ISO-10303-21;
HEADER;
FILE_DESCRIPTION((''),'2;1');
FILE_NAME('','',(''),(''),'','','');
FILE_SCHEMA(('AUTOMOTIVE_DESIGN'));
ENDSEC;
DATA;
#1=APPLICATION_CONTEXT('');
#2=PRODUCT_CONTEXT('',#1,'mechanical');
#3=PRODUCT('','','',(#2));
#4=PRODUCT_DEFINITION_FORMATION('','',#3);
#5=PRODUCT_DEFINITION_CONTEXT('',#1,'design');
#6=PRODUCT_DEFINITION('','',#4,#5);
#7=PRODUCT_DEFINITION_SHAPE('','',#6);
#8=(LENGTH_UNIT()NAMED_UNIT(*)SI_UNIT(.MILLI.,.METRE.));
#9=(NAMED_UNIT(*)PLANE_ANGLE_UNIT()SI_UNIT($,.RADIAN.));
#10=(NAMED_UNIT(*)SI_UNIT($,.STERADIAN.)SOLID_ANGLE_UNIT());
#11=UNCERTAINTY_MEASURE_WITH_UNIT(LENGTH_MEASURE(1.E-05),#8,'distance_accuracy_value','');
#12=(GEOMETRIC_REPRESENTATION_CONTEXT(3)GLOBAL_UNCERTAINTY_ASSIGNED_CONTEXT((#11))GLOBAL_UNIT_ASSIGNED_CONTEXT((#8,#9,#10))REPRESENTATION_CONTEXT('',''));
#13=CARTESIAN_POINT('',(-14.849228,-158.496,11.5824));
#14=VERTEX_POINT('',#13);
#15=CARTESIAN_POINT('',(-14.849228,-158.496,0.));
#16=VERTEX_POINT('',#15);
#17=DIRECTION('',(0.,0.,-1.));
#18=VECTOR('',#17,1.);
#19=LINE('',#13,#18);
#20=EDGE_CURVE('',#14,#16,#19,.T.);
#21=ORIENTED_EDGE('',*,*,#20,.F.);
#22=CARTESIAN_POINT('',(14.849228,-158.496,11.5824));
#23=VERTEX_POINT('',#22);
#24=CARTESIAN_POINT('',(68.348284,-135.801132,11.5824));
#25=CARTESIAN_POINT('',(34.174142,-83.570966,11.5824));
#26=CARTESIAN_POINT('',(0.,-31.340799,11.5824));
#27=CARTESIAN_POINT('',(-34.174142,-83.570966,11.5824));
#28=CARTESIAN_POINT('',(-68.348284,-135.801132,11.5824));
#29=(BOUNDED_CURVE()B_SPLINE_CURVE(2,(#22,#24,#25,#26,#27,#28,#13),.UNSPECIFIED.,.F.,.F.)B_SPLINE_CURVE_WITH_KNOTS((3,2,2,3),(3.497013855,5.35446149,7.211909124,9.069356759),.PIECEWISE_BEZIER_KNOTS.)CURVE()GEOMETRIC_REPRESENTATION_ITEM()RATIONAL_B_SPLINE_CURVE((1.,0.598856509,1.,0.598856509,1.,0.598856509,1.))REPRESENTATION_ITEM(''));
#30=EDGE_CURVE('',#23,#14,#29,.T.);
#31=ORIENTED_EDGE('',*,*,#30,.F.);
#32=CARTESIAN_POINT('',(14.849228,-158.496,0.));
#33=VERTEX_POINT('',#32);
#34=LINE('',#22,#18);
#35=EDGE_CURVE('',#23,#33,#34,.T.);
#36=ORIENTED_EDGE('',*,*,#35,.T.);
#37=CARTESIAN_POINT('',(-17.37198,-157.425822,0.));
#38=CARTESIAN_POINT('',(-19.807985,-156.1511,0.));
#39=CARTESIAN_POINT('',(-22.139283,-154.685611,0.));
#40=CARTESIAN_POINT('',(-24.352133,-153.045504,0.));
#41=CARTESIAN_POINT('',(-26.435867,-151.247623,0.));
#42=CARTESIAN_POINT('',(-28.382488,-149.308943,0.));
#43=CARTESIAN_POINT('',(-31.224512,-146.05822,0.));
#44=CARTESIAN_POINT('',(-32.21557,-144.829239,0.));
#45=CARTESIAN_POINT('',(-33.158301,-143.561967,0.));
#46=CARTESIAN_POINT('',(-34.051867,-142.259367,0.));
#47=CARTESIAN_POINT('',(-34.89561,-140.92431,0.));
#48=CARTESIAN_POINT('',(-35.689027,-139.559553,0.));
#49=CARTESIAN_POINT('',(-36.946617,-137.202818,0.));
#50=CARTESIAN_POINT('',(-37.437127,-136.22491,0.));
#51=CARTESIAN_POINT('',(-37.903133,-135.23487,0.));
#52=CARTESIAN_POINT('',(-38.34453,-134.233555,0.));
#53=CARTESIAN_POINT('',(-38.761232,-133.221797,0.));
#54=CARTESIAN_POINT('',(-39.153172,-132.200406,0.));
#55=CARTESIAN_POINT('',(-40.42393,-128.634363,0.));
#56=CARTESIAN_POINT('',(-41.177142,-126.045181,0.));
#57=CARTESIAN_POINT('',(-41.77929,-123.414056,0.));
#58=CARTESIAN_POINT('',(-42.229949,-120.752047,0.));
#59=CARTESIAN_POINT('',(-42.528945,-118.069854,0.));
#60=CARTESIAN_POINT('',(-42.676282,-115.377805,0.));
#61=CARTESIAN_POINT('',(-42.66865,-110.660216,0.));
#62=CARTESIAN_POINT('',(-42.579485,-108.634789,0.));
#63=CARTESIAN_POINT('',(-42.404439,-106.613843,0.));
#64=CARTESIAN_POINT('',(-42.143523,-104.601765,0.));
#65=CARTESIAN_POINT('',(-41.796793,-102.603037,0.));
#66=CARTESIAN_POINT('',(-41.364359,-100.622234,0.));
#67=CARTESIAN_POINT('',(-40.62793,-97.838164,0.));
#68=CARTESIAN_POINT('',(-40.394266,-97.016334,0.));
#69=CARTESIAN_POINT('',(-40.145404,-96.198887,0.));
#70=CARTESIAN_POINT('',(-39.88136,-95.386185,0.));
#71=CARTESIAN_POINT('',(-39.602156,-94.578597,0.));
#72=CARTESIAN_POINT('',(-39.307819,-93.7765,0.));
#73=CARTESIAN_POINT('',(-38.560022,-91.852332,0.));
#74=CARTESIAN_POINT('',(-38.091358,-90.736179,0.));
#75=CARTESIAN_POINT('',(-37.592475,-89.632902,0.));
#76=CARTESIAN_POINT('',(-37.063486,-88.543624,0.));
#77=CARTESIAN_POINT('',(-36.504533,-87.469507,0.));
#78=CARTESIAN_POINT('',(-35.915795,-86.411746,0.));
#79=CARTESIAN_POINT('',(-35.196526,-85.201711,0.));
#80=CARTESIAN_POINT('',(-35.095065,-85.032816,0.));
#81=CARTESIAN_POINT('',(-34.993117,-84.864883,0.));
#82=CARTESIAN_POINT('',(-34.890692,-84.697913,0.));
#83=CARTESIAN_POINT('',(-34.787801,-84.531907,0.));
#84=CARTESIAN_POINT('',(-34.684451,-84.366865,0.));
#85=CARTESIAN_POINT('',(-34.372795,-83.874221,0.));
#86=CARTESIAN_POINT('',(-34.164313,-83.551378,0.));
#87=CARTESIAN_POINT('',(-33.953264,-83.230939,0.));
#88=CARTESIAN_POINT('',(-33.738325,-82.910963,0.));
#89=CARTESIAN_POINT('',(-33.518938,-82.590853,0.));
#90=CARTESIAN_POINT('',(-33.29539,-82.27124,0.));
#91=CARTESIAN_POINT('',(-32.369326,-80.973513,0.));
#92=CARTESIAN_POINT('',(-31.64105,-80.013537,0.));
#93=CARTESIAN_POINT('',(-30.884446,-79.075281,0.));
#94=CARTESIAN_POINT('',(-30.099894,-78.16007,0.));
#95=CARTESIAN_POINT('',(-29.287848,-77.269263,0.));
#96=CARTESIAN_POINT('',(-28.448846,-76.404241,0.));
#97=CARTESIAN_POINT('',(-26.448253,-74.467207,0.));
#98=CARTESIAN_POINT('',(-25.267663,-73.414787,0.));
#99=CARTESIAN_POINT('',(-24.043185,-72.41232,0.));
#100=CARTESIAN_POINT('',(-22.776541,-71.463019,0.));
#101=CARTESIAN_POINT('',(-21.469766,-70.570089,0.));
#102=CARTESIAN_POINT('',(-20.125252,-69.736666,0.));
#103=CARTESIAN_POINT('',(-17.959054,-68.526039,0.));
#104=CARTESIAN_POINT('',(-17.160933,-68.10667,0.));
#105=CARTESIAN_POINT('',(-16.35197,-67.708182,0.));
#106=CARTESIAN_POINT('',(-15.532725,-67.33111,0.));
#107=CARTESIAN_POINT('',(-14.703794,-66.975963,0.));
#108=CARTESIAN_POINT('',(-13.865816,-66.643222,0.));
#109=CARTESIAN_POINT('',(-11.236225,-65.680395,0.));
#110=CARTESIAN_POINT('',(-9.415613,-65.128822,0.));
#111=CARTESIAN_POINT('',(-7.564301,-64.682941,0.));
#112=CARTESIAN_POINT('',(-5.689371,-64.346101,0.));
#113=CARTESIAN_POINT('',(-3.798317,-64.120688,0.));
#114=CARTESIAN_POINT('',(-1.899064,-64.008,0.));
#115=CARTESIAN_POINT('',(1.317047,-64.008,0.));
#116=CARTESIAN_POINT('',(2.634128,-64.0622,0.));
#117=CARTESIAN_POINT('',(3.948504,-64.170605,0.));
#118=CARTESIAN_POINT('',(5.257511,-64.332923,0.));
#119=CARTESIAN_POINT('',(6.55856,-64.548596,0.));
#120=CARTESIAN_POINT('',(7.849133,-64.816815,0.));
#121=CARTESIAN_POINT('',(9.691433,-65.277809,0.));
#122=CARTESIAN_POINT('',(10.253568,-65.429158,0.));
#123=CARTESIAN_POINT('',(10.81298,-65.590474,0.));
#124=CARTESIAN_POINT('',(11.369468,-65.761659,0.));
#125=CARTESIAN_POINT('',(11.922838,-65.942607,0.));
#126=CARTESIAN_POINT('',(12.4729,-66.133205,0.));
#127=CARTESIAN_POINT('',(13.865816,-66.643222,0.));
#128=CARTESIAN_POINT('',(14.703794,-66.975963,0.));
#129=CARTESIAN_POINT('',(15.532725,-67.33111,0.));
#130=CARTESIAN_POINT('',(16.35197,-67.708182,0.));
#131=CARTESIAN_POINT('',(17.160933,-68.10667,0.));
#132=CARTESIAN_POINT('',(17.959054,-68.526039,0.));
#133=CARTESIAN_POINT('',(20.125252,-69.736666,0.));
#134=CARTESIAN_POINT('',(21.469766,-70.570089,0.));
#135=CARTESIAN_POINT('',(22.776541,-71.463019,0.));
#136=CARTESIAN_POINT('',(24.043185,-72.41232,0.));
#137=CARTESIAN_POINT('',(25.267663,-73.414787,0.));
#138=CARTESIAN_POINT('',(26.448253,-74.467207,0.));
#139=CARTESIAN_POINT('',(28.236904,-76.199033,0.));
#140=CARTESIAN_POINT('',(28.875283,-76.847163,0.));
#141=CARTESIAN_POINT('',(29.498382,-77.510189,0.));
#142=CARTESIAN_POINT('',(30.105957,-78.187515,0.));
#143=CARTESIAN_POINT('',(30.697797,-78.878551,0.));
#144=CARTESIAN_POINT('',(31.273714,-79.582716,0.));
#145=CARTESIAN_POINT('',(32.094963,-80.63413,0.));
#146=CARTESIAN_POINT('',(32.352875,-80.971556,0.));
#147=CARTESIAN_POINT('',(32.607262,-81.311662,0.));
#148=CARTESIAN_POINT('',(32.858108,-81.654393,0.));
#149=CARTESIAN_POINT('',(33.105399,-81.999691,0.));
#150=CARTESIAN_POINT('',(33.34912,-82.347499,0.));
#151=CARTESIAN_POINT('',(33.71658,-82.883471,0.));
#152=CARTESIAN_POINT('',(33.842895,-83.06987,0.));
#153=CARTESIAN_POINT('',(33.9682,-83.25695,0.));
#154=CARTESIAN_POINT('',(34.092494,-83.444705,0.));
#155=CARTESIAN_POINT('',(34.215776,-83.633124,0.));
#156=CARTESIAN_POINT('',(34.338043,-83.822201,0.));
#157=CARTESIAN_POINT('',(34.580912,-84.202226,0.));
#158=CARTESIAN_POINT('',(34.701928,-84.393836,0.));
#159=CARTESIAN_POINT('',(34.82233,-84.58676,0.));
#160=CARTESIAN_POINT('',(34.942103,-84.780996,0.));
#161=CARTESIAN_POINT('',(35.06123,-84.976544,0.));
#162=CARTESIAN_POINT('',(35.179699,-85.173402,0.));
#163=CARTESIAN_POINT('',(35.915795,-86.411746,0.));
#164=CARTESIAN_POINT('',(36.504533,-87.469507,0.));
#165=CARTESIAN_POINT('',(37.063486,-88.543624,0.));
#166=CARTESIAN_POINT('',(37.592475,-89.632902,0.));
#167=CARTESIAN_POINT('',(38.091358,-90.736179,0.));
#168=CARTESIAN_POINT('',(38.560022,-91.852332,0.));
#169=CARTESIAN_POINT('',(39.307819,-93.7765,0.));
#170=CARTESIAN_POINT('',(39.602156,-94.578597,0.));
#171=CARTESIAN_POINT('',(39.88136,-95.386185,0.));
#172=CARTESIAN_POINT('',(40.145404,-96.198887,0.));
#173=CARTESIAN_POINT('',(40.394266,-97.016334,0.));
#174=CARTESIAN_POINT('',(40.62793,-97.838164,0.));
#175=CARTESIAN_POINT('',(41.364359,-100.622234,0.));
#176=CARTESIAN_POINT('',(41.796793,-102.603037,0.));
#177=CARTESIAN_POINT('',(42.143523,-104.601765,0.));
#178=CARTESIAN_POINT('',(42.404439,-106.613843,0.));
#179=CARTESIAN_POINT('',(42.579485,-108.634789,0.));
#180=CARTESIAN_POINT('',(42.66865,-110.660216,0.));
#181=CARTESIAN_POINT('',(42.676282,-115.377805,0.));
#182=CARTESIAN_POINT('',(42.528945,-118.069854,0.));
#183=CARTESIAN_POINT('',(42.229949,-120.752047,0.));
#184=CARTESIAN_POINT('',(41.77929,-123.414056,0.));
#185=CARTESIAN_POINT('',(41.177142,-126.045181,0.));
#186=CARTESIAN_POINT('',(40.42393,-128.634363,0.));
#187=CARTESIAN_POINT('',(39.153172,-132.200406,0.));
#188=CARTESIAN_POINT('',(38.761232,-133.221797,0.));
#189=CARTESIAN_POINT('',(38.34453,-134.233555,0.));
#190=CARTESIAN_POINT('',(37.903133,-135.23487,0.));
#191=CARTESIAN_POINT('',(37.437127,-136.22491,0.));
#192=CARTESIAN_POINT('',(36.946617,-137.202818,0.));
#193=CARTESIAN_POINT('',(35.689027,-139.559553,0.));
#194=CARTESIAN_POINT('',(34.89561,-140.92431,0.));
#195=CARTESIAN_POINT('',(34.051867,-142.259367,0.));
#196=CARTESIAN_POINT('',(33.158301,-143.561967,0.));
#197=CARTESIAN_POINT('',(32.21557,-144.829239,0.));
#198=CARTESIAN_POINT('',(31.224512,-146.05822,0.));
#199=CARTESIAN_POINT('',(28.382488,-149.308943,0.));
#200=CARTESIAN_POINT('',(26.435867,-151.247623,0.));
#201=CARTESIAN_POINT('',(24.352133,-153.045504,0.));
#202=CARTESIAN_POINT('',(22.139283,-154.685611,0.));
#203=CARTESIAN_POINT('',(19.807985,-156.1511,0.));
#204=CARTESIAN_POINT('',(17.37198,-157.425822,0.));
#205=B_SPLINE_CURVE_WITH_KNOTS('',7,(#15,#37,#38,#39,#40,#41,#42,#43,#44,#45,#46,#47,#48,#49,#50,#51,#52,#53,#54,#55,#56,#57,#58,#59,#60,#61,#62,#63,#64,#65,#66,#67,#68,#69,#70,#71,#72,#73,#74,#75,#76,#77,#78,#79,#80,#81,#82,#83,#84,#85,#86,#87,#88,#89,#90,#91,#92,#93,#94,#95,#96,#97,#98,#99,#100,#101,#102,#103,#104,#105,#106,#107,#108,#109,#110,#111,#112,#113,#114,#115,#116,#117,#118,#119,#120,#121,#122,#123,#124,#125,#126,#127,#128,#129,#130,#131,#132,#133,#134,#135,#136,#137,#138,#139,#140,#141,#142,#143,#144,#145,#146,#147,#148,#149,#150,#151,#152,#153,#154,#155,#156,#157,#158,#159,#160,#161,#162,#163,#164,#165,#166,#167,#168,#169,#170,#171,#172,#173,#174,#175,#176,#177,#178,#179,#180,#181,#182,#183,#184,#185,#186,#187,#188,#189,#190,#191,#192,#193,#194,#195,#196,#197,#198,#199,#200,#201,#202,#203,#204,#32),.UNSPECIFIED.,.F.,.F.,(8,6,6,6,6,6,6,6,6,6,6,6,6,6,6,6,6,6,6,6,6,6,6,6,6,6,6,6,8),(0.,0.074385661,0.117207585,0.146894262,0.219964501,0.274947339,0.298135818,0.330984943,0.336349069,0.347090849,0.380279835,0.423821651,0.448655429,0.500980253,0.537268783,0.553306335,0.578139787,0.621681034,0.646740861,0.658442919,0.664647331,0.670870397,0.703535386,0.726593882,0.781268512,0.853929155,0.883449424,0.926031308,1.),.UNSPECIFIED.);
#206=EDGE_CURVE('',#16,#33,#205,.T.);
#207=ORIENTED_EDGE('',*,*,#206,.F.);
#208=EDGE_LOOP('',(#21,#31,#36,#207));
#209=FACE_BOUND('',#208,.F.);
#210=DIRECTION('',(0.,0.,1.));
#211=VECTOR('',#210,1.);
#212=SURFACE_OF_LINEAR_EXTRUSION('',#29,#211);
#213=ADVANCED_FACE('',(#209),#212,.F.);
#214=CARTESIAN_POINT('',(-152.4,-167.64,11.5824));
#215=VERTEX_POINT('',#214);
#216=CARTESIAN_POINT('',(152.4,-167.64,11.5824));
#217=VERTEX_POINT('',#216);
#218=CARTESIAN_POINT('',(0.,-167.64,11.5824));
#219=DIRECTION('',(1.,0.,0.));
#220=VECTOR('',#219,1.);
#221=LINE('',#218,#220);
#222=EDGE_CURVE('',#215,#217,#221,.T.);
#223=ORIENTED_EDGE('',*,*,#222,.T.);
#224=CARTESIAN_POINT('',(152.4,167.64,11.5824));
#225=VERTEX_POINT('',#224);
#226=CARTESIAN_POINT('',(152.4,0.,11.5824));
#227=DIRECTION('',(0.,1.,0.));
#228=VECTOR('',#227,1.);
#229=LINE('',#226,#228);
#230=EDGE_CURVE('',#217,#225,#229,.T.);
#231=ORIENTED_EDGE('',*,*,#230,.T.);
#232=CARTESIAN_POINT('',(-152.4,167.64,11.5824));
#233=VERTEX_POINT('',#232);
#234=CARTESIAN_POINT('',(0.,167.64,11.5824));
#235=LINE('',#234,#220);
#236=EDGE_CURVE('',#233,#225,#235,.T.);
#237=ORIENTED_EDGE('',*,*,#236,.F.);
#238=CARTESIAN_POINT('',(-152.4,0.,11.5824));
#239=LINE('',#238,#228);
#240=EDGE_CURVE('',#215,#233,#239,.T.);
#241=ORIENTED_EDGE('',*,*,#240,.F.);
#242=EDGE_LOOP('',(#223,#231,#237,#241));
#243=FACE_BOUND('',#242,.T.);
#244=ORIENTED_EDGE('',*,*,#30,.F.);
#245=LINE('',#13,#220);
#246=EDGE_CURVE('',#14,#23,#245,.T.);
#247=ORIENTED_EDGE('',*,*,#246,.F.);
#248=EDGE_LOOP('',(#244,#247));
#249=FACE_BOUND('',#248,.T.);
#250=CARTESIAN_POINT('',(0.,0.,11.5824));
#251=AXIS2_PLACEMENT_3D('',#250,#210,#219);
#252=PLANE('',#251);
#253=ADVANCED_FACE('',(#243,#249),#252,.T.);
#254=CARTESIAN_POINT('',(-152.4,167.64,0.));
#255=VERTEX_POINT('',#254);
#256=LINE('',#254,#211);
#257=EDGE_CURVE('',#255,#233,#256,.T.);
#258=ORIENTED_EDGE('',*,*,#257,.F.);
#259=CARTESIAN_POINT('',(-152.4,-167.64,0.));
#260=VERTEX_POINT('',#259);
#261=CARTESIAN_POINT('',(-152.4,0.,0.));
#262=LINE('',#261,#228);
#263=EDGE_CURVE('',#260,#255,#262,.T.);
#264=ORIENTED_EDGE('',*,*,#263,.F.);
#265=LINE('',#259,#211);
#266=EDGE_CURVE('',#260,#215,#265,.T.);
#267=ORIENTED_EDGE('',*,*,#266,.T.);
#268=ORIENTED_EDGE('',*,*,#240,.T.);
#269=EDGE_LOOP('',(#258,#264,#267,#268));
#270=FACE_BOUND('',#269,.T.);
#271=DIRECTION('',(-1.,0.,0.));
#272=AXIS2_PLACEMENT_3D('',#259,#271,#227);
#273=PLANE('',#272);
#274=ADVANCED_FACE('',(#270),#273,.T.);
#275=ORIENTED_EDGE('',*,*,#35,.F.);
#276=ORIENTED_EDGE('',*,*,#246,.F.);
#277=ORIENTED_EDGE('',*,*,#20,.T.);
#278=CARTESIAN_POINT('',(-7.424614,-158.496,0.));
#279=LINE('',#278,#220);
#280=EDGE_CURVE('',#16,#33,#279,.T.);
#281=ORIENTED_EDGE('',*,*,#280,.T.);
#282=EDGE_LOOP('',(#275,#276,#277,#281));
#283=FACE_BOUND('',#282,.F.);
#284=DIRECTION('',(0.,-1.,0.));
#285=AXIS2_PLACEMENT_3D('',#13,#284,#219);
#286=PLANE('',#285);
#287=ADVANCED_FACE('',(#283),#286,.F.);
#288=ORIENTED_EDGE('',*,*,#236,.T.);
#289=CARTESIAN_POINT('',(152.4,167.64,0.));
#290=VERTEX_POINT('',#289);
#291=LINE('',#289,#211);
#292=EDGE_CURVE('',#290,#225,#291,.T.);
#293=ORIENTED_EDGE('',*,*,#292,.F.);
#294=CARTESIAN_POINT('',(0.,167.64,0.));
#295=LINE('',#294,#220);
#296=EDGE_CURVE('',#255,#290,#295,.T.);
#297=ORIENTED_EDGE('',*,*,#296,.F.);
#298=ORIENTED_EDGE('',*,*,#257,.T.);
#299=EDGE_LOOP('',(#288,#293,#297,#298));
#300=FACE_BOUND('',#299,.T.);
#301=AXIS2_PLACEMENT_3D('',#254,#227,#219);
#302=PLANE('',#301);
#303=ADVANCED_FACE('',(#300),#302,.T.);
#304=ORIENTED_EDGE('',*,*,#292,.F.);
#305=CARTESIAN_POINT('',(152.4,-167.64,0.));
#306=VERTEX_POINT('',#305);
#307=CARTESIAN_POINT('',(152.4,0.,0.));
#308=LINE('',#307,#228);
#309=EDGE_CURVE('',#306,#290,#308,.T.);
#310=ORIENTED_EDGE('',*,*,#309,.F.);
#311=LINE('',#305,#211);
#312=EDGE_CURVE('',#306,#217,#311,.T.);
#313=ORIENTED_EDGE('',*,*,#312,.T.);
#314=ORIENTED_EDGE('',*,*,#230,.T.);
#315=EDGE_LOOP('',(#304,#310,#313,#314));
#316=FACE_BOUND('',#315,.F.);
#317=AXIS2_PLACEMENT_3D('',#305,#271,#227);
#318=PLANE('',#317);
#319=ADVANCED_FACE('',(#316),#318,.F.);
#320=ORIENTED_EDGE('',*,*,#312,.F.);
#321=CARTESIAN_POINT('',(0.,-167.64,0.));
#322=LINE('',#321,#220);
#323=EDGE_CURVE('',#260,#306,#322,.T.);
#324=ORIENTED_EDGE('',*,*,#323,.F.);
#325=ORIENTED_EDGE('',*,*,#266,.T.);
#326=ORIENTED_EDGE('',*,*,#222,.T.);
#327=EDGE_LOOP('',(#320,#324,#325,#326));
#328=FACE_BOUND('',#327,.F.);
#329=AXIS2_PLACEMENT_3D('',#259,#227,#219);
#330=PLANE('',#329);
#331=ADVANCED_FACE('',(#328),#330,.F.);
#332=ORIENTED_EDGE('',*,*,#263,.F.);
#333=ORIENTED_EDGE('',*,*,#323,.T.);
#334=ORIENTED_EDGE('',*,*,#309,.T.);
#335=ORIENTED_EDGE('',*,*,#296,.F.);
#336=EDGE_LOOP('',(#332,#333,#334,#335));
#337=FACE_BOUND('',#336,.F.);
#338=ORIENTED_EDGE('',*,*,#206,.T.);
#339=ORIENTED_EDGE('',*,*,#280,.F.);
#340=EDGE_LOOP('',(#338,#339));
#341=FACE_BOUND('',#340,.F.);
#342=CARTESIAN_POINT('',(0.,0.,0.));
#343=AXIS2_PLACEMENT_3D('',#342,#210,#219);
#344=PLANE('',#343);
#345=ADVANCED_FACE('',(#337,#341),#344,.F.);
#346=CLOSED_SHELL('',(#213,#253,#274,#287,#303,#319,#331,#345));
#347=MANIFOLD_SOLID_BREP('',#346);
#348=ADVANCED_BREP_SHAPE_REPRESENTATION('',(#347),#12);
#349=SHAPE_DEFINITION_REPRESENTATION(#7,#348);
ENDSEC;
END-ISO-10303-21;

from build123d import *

# Parameters (mm, degrees)
F0_W     = 304.8
F0_H     = 335.28
F1_DEPTH = 11.5824
F3_DEPTH = 11.5834


with BuildPart() as f1:
    # F0 (on Top) → F1 (new body)
    with BuildSketch(Plane.XY):
        Rectangle(F0_W, F0_H)
    extrude(amount=F1_DEPTH)

    # F2 (on face) → F3 (cut, through all)
    with BuildSketch(Plane.XY.offset(11.5824)):
        with BuildLine():
            Line((-14.8492275557, -158.496), (14.8492275557, -158.496))
            add(Edge.make_bspline(
                [(14.8492275557, -158.496), (68.3482837309, -135.801132311), (34.1741418655, -83.5709657846), (0, -31.3407992582), (-34.1741418655, -83.5709657846), (-68.3482837309, -135.801132311), (-14.8492275557, -158.496)],
                knots=[3.4970138553, 3.4970138553, 3.4970138553, 5.3544614899, 5.3544614899, 7.2119091245, 7.2119091245, 9.0693567591, 9.0693567591, 9.0693567591], degree=2, weights=[1, 0.5988565087, 1, 0.5988565087, 1, 0.5988565087, 1]))
        make_face()
    extrude(amount=-F3_DEPTH, mode=Mode.SUBTRACT)


solid = f1.part
